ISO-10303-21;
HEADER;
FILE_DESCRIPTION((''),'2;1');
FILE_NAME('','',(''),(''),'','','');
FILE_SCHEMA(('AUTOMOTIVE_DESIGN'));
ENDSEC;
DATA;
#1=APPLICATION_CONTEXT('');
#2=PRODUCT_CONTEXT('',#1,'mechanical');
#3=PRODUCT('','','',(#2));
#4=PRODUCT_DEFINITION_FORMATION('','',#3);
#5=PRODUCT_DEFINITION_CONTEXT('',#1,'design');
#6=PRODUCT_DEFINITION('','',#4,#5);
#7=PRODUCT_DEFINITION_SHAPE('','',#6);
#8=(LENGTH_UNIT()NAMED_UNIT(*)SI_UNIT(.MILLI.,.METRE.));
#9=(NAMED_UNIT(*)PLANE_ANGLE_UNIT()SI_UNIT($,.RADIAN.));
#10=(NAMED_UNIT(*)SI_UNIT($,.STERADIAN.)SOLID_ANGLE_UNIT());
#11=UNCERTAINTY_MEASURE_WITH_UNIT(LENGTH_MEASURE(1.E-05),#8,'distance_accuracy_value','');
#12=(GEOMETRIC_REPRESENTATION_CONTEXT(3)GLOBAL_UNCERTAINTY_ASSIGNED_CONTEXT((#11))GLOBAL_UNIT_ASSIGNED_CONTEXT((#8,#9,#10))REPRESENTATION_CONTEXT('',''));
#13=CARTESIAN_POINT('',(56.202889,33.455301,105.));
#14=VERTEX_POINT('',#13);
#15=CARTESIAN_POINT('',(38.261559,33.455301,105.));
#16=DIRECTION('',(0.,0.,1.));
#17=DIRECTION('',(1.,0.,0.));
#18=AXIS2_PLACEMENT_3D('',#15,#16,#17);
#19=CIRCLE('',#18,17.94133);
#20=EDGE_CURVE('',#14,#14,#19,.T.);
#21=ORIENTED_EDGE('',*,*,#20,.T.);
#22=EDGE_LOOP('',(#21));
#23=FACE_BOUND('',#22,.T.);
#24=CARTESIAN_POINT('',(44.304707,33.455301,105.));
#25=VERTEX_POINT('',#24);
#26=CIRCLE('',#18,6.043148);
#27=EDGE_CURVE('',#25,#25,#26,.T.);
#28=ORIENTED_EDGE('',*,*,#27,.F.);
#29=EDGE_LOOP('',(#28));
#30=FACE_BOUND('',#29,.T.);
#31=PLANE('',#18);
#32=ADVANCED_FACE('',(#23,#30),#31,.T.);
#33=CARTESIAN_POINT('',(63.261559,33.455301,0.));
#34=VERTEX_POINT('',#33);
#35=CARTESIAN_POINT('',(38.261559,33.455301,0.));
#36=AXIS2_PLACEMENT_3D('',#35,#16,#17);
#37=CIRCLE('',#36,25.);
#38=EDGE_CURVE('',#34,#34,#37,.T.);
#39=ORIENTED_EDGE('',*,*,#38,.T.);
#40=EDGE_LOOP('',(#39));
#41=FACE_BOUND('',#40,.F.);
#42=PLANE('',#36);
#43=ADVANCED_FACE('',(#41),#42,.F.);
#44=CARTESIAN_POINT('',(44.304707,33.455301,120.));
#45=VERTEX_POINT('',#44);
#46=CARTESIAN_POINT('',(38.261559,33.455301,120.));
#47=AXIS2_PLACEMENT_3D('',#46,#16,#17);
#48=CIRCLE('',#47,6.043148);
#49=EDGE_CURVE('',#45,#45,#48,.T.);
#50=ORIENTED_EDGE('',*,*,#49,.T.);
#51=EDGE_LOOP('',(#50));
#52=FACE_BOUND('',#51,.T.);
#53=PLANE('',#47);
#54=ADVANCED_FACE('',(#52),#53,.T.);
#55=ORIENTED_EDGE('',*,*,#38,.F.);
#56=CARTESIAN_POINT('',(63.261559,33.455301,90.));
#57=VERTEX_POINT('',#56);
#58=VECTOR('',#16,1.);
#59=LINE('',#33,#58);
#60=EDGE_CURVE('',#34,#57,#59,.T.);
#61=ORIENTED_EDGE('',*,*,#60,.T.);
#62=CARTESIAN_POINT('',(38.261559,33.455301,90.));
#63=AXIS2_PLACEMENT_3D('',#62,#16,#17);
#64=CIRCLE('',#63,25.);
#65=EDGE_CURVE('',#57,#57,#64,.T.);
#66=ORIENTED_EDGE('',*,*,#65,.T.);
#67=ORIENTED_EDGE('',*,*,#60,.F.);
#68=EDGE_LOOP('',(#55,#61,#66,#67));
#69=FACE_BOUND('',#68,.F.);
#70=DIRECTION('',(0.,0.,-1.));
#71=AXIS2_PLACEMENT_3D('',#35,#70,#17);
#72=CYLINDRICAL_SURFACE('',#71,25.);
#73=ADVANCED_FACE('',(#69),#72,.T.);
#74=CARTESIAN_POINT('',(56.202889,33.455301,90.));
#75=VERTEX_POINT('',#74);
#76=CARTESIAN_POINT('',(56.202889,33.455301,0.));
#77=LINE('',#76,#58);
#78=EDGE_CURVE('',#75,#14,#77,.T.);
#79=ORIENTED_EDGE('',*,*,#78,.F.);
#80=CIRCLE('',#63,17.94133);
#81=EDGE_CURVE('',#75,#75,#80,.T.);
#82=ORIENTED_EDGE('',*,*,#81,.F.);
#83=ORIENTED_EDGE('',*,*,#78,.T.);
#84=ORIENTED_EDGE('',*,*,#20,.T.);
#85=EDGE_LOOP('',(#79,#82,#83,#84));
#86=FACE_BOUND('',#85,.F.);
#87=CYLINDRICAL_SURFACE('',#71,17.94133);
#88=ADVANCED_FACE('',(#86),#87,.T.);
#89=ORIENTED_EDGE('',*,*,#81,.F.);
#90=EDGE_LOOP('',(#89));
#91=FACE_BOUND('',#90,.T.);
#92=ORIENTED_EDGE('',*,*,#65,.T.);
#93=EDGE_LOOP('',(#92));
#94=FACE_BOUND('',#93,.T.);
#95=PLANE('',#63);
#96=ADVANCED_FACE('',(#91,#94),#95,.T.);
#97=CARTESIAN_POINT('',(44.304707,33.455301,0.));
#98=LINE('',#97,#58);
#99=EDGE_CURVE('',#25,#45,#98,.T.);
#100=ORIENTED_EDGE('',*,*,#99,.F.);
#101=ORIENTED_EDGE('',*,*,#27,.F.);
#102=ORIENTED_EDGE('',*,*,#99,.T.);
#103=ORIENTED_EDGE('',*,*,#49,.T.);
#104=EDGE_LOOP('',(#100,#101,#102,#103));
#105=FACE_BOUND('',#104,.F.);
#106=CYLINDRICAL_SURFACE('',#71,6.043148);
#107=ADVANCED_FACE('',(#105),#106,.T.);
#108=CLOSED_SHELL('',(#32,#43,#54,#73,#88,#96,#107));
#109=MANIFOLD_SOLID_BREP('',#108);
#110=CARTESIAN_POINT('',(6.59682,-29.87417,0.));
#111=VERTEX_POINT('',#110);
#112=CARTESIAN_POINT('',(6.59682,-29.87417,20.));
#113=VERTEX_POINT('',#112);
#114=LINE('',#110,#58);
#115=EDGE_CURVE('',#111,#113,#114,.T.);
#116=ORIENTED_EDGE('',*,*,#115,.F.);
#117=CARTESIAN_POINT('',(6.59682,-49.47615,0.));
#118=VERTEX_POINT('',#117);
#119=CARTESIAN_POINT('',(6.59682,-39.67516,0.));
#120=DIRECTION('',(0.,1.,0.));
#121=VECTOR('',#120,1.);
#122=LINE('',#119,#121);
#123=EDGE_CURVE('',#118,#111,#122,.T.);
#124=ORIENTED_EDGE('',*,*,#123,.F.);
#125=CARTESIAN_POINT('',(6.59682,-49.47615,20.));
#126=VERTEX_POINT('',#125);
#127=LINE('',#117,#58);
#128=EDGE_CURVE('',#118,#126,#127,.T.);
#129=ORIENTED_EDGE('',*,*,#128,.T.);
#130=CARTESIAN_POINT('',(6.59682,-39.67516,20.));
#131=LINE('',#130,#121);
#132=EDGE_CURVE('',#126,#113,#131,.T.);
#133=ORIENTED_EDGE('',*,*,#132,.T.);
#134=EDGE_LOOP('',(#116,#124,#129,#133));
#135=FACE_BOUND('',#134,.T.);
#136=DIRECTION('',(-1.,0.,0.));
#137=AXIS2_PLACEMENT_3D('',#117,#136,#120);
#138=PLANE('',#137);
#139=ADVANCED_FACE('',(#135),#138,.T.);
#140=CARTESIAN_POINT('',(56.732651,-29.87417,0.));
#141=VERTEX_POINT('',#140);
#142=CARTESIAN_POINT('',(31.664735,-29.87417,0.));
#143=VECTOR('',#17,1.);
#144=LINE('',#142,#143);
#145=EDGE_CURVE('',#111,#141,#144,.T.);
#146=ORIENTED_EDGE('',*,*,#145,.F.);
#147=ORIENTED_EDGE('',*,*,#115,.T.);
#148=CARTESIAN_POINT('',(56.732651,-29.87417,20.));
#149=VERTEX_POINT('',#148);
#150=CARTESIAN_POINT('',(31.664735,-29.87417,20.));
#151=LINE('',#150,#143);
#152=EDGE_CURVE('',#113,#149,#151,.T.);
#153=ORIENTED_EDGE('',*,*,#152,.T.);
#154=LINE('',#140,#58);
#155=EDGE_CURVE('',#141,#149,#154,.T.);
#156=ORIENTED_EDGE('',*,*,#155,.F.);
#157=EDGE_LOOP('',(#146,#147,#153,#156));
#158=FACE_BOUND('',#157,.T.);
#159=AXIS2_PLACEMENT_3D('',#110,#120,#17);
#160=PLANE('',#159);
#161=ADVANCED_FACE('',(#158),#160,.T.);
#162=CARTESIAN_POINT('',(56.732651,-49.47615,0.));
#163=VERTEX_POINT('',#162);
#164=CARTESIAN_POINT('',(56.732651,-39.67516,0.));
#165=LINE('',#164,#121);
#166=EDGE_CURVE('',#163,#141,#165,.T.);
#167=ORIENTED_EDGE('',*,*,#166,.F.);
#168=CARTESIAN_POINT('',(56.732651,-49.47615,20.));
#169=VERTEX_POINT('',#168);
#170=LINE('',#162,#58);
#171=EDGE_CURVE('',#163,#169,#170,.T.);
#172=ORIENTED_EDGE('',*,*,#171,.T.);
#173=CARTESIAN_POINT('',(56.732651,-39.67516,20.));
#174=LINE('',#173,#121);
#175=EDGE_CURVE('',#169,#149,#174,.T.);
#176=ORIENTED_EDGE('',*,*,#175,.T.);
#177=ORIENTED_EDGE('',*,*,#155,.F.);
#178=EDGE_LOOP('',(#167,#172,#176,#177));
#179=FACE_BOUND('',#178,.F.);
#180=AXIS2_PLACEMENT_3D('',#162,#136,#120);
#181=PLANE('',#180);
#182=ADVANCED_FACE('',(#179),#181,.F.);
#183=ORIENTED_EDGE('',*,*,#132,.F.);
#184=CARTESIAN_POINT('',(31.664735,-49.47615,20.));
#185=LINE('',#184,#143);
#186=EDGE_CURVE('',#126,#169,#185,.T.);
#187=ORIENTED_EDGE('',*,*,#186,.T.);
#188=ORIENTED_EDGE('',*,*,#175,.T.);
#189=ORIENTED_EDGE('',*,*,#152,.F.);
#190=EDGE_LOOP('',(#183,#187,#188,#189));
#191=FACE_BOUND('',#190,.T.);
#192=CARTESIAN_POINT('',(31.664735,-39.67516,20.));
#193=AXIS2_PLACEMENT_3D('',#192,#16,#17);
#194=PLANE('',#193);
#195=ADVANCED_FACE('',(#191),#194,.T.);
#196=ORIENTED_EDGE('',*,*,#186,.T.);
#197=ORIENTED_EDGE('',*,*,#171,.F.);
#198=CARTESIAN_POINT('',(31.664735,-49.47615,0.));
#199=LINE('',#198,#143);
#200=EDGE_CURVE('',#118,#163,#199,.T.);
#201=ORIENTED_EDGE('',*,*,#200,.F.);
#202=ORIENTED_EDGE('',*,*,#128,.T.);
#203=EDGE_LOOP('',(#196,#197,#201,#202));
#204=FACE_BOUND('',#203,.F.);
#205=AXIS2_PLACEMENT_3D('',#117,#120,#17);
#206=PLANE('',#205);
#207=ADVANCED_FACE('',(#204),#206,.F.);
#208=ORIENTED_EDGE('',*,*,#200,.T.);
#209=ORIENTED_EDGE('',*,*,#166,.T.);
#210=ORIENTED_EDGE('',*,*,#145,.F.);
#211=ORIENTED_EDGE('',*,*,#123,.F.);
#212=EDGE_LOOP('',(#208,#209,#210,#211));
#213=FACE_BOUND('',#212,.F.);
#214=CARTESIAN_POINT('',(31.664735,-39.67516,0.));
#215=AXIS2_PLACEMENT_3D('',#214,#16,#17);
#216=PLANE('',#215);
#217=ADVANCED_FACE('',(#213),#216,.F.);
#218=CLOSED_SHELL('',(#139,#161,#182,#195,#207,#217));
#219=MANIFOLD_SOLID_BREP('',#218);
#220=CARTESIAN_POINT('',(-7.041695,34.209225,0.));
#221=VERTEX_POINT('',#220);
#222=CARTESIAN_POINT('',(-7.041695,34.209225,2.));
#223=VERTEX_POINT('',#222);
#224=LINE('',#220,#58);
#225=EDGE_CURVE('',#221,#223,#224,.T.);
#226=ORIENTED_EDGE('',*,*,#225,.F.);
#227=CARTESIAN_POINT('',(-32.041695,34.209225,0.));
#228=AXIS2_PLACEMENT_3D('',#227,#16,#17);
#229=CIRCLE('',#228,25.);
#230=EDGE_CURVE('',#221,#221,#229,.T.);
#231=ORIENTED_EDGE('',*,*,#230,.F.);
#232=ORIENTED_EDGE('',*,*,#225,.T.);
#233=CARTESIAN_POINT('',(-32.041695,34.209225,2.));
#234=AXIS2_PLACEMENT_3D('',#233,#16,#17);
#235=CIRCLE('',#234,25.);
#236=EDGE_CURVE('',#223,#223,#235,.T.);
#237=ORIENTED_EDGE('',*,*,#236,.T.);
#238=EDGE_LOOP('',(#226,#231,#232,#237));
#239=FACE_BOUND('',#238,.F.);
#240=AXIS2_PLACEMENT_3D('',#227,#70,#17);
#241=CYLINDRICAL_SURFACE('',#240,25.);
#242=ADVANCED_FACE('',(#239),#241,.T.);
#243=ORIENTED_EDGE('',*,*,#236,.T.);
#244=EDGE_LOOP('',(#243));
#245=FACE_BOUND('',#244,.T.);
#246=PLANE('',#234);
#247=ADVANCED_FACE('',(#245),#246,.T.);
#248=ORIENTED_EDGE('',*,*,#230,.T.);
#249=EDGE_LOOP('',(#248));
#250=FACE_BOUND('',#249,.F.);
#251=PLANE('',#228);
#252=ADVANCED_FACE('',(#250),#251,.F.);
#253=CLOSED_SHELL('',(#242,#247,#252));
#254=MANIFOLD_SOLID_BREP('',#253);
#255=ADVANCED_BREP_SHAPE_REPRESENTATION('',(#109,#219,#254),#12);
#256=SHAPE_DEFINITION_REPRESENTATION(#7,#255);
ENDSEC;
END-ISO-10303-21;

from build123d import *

# Parameters (mm, degrees)
F0_R     = 25
F2_DEPTH = 2
F3_R     = 25
F3_R_2   = 17.9413304425
F4_DEPTH = 90
F3_R_3   = 6.0431477175
F5_DEPTH = 105
F6_DEPTH = 120
F7_W     = 50.1358308829
F7_H     = 19.6019802243
F8_DEPTH = 20


# Not quite as in the source:
# - the program builds the solid bodies; features that only make, move or delete a surface that nothing else refers to are left out


with BuildPart() as f2:
    # F0 (on Top) → F2 (new body)
    with BuildSketch(Plane.XY):
        with Locations((-32.0416949689, 34.2092253268)):
            Circle(F0_R)
    extrude(amount=F2_DEPTH)


with BuildPart() as f4:
    # F3 (on Top) → F4 (new body)
    with BuildSketch(Plane.XY):
        with Locations((38.2615588605, 33.4553010762)):
            Circle(F3_R)
        with Locations((38.2615588605, 33.4553010762)):
            Circle(F3_R_2, mode=Mode.SUBTRACT)
    extrude(amount=F4_DEPTH)

    # F3 (on Top) → F5 (join)
    with BuildSketch(Plane.XY):
        with Locations((38.2615588605, 33.4553010762)):
            Circle(F3_R_2)
        with Locations((38.2615588605, 33.4553010762)):
            Circle(F3_R_3, mode=Mode.SUBTRACT)
    extrude(amount=F5_DEPTH)

    # F3 (on Top) → F6 (join)
    with BuildSketch(Plane.XY):
        with Locations((38.2615588605, 33.4553010762)):
            Circle(F3_R_3)
    extrude(amount=F6_DEPTH)


with BuildPart() as f8:
    # F7 (on Top) → F8 (new body)
    with BuildSketch(Plane.XY):
        with Locations((31.6647354048, -39.6751603112)):
            Rectangle(F7_W, F7_H)
    extrude(amount=F8_DEPTH)


solid = Compound([f2.part, f4.part, f8.part])
